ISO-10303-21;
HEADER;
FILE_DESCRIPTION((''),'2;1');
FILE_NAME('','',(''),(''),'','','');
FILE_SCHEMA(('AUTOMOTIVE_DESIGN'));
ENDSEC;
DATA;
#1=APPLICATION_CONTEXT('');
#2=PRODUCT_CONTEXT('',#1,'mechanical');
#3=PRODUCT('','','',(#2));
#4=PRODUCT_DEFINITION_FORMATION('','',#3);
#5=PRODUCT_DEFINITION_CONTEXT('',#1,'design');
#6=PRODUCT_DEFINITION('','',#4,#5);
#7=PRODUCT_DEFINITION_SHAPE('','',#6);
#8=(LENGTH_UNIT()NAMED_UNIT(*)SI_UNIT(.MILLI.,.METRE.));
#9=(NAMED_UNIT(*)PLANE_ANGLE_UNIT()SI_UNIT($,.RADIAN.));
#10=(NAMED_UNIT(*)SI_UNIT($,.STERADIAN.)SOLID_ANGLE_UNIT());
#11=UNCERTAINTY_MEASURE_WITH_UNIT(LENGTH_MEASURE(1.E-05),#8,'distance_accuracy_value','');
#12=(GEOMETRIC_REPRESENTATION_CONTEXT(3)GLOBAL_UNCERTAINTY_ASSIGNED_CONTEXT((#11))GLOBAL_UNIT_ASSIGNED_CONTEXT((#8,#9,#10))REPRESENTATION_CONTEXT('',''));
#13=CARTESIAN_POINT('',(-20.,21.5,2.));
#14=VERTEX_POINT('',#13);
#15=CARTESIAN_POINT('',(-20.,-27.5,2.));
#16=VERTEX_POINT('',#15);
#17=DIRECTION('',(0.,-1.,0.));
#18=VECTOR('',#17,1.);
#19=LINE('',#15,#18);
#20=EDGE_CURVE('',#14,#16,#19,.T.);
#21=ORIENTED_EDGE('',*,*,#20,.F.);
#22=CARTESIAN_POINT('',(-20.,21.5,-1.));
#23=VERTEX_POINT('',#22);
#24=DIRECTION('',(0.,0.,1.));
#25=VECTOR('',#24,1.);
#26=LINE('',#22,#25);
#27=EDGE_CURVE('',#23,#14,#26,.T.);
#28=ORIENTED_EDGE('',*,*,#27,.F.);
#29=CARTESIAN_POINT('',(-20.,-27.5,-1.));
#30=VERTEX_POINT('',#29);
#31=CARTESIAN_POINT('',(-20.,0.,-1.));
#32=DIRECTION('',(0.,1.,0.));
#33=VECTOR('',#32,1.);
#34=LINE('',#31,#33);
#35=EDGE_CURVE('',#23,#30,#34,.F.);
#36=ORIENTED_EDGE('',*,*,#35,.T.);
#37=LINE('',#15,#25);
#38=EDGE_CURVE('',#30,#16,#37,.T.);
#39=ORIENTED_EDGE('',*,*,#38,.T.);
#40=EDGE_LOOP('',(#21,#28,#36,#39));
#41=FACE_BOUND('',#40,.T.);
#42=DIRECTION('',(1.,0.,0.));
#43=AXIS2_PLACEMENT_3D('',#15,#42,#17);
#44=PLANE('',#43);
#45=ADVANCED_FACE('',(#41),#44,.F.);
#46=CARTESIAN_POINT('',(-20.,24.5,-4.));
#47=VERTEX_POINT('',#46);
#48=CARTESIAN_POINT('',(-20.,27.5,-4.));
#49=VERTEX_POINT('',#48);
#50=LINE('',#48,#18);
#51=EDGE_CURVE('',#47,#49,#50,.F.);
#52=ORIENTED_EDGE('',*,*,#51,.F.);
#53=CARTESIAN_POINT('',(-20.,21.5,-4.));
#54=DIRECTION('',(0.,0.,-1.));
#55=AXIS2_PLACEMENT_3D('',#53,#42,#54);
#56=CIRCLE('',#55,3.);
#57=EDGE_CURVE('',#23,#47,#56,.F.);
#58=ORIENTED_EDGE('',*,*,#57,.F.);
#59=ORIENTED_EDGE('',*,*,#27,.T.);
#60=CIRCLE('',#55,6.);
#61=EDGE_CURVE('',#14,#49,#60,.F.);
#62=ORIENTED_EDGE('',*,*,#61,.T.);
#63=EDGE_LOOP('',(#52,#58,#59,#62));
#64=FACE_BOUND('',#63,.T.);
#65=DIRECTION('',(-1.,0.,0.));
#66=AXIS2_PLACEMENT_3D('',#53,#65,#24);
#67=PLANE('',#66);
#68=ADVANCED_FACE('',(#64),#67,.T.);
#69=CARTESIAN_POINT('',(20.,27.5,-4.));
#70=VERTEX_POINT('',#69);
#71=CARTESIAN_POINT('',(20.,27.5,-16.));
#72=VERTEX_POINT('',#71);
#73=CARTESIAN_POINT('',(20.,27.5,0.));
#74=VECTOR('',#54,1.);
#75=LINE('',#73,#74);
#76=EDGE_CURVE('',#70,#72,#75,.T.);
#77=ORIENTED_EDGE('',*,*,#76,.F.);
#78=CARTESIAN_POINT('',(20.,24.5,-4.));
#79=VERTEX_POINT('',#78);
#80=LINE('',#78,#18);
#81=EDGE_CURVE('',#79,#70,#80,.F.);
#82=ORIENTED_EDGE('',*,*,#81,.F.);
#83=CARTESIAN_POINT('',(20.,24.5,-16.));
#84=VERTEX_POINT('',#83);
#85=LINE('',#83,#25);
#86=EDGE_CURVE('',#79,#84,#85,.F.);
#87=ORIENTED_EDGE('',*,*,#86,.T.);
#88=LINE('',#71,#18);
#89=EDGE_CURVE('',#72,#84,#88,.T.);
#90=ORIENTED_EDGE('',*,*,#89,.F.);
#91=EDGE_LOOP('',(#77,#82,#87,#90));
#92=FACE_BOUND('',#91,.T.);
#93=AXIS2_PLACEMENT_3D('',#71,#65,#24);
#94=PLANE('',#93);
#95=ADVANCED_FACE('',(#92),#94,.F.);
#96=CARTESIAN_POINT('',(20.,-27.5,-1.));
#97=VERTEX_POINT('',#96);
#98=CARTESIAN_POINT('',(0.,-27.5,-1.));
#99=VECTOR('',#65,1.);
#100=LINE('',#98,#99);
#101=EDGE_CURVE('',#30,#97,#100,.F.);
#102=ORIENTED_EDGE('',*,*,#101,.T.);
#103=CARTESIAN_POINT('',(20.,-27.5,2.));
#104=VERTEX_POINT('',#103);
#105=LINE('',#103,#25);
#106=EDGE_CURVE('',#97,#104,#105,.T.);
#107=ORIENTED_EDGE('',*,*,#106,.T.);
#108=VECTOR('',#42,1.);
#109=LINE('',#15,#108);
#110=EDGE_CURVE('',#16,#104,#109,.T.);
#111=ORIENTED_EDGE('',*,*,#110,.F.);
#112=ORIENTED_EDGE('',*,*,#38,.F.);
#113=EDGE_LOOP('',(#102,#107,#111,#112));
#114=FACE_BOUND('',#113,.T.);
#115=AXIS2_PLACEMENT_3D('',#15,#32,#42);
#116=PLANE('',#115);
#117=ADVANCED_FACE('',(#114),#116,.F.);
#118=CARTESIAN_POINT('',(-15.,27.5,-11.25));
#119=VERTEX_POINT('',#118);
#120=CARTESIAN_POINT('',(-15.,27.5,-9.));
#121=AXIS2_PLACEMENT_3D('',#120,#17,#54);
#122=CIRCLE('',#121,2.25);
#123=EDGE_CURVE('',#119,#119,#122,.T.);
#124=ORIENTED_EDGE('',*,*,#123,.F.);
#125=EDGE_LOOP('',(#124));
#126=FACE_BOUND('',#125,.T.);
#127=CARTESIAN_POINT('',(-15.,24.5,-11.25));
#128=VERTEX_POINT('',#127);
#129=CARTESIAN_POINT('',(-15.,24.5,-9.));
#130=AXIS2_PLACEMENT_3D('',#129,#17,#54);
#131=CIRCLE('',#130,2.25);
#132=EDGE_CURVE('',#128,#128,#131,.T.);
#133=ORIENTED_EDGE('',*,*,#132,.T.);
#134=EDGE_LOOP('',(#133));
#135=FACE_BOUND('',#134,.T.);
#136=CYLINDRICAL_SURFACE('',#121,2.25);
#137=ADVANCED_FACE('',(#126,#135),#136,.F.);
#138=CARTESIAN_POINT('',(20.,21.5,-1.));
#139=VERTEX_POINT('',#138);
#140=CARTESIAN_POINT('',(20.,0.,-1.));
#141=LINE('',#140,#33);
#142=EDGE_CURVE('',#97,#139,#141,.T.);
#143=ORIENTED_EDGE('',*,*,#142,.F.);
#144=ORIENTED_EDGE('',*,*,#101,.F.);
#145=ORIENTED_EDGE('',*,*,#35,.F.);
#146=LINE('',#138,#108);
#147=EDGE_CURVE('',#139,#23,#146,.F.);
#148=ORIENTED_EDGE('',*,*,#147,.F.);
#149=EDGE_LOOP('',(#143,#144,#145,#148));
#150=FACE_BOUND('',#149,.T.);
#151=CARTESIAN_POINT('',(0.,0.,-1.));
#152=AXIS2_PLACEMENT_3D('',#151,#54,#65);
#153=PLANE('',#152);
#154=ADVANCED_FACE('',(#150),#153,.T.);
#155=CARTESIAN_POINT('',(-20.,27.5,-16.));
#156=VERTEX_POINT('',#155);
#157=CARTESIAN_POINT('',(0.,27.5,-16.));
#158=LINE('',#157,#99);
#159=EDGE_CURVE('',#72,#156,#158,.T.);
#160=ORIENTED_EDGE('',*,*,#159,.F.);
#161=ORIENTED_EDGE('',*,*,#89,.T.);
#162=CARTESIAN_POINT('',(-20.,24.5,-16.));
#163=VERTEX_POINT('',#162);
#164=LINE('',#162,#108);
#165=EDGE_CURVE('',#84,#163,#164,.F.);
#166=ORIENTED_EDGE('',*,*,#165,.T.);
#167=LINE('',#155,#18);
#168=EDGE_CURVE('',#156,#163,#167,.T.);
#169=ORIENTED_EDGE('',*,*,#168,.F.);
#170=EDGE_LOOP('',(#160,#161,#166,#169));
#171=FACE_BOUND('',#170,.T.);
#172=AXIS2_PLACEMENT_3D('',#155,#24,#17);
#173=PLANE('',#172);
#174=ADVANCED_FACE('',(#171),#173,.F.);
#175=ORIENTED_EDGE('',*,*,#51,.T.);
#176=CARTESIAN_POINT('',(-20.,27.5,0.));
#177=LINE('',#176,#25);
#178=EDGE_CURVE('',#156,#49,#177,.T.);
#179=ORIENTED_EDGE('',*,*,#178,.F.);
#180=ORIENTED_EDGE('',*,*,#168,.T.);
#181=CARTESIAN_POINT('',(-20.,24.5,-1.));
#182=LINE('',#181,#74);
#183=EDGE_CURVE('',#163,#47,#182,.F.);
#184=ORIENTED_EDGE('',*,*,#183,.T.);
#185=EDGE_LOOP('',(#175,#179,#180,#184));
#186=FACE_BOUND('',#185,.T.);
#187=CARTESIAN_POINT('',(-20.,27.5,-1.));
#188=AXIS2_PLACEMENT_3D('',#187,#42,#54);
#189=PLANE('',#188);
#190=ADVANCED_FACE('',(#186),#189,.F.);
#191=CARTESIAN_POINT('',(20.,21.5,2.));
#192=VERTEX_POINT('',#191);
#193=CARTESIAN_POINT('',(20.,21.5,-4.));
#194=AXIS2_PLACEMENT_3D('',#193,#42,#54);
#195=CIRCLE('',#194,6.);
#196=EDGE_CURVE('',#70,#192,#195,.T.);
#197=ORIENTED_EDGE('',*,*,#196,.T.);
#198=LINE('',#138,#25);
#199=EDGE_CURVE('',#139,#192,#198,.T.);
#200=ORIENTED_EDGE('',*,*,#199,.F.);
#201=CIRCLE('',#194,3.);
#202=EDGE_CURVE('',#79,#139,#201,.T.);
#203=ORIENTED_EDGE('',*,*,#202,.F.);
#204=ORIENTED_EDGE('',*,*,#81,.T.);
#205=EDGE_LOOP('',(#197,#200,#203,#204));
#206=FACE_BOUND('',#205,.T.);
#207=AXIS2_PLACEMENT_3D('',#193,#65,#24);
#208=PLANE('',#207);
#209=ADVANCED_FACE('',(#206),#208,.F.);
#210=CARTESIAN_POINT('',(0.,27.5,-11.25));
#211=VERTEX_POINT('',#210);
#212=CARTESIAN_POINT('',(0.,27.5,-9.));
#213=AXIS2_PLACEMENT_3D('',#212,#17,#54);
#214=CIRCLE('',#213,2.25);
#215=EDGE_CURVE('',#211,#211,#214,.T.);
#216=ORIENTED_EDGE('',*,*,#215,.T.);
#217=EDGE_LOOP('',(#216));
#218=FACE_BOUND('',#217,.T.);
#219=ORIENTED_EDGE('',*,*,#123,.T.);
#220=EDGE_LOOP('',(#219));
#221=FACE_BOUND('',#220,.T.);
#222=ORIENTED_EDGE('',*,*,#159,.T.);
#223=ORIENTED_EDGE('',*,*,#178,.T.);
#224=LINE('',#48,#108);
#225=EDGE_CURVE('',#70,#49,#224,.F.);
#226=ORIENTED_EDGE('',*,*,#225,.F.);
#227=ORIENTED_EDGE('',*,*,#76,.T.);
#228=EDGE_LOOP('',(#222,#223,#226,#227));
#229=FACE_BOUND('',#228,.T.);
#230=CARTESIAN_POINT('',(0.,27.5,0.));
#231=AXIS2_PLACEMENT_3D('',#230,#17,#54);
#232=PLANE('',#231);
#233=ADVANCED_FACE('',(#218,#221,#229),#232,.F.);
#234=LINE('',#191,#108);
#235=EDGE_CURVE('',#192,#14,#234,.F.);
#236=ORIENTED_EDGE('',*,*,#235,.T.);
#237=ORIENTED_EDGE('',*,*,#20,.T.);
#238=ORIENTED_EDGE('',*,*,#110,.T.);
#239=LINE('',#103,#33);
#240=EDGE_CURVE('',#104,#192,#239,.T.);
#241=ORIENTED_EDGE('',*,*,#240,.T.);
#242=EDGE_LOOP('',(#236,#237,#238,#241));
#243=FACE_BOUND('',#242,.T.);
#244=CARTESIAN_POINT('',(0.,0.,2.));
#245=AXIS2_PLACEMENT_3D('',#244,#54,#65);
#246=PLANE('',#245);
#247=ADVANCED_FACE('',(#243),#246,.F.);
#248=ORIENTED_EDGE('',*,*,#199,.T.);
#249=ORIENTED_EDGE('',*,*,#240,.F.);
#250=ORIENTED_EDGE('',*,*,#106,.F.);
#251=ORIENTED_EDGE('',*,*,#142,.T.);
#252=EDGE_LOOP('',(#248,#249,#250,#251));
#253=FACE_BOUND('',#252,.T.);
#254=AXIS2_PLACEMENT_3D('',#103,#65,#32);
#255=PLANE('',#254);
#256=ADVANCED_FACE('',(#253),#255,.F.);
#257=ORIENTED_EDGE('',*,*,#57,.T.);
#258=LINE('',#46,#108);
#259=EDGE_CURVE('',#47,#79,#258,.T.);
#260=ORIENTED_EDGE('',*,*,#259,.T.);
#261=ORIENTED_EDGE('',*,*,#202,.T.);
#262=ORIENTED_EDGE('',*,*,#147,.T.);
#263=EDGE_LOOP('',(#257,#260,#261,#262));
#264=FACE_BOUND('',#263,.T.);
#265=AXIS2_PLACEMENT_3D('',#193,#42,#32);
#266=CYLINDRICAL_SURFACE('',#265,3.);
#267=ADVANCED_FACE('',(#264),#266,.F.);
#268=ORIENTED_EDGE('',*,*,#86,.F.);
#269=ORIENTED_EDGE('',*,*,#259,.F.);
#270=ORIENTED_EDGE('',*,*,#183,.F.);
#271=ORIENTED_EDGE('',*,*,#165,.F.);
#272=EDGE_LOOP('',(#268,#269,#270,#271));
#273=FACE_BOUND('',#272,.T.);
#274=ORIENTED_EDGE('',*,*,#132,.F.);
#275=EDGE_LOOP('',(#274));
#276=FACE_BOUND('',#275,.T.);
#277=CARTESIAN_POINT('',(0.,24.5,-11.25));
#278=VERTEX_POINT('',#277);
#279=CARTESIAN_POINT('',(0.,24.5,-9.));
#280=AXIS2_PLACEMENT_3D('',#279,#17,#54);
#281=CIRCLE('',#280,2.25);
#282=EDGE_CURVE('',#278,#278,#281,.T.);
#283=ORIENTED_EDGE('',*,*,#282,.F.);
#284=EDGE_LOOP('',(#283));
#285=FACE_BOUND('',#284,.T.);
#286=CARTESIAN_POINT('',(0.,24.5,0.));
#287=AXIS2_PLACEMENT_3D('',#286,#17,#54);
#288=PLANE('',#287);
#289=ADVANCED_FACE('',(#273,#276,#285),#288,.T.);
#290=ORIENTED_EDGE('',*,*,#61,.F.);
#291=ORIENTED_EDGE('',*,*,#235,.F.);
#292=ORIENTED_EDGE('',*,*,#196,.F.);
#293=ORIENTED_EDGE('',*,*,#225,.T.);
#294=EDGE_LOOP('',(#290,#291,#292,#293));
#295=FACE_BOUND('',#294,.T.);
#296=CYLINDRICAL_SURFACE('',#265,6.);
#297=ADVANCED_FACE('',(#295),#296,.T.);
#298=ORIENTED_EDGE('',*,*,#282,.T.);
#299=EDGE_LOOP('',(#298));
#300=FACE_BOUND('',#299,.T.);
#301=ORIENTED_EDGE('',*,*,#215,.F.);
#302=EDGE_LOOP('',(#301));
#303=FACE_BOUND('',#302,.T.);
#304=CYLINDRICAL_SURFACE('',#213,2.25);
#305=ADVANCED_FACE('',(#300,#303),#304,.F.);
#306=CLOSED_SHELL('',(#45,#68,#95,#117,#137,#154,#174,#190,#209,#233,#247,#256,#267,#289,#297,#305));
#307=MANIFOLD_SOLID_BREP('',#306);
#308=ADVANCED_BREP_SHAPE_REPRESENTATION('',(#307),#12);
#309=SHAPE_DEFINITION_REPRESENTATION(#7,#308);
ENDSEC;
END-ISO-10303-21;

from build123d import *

# Parameters (mm, degrees)
SKETCH1_W                    = 40
SKETCH1_H                    = 55
BOSS_EXTRUDE1_DEPTH          = 2
CONVERT_SOLID1_START         = -20
CONVERT_SOLID1_OUTLINE_W     = 55
CONVERT_SOLID1_OUTLINE_H     = 1
CONVERT_SOLID1_DEPTH         = 40
EDGE_FLANGE1_STRIP_W         = 18
EDGE_FLANGE1_STRIP_H         = 3
EDGE_FLANGE1_STRIP_CUT_DEPTH = 40
EDGE_FLANGE1_DEPTH           = 40
SKETCH10_R                   = 2.25
CUT_EXTRUDE1_DEPTH           = 58.965506985


# Read off the part's stored shape, not the designer's step: Convert-Solid1
# Sheet-metal steps are written as plain solids
with BuildPart() as part:
    # Sketch1 → Boss-Extrude1 (new body)
    with BuildSketch(Plane.XY):
        Rectangle(SKETCH1_W, SKETCH1_H)
    extrude(amount=BOSS_EXTRUDE1_DEPTH)

    # Convert-Solid1 outline → Convert-Solid1 (add)
    with BuildSketch(Plane.YZ.offset(CONVERT_SOLID1_START)):
        with Locations((0, -0.5)):
            Rectangle(CONVERT_SOLID1_OUTLINE_W, CONVERT_SOLID1_OUTLINE_H)
    extrude(amount=CONVERT_SOLID1_DEPTH)

    # Edge-Flange1 strip (across the edge) → Edge-Flange1 strip cut (cut)
    with BuildSketch(Plane(origin=(-20, 27.5, -1), x_dir=(0, -1, 0), z_dir=(1, 0, 0))):
        with Locations((-3, -1.5)):
            Rectangle(EDGE_FLANGE1_STRIP_W, EDGE_FLANGE1_STRIP_H)
    extrude(amount=EDGE_FLANGE1_STRIP_CUT_DEPTH, mode=Mode.SUBTRACT)

    # Edge-Flange1 section (across the edge) → Edge-Flange1 (add)
    with BuildSketch(Plane(origin=(-20, 27.5, -1), x_dir=(0, -1, 0), z_dir=(1, 0, 0))):
        with BuildLine():
            Line((0, 3), (0, 15))
            Line((0, 15), (3, 15))
            Line((3, 15), (3, 3))
            ThreePointArc((3, 3), (3.878679656, 0.878679656), (6, 0))
            Line((6, 0), (6, -3))
            ThreePointArc((6, -3), (1.757359313, -1.242640687), (0, 3))
        make_face()
    extrude(amount=EDGE_FLANGE1_DEPTH)

    # Sketch10 → Cut-Extrude1 (cut, through all)
    with BuildSketch(Plane.XZ.offset(-24.5)):
        with Locations(Location((-15, -9, 0), (0, 0, 270))):
            Circle(SKETCH10_R)
        with Locations(Location((0, -9, 0), (0, 0, 270))):
            Circle(SKETCH10_R)
    extrude(amount=-CUT_EXTRUDE1_DEPTH, mode=Mode.SUBTRACT)


solid = part.part
